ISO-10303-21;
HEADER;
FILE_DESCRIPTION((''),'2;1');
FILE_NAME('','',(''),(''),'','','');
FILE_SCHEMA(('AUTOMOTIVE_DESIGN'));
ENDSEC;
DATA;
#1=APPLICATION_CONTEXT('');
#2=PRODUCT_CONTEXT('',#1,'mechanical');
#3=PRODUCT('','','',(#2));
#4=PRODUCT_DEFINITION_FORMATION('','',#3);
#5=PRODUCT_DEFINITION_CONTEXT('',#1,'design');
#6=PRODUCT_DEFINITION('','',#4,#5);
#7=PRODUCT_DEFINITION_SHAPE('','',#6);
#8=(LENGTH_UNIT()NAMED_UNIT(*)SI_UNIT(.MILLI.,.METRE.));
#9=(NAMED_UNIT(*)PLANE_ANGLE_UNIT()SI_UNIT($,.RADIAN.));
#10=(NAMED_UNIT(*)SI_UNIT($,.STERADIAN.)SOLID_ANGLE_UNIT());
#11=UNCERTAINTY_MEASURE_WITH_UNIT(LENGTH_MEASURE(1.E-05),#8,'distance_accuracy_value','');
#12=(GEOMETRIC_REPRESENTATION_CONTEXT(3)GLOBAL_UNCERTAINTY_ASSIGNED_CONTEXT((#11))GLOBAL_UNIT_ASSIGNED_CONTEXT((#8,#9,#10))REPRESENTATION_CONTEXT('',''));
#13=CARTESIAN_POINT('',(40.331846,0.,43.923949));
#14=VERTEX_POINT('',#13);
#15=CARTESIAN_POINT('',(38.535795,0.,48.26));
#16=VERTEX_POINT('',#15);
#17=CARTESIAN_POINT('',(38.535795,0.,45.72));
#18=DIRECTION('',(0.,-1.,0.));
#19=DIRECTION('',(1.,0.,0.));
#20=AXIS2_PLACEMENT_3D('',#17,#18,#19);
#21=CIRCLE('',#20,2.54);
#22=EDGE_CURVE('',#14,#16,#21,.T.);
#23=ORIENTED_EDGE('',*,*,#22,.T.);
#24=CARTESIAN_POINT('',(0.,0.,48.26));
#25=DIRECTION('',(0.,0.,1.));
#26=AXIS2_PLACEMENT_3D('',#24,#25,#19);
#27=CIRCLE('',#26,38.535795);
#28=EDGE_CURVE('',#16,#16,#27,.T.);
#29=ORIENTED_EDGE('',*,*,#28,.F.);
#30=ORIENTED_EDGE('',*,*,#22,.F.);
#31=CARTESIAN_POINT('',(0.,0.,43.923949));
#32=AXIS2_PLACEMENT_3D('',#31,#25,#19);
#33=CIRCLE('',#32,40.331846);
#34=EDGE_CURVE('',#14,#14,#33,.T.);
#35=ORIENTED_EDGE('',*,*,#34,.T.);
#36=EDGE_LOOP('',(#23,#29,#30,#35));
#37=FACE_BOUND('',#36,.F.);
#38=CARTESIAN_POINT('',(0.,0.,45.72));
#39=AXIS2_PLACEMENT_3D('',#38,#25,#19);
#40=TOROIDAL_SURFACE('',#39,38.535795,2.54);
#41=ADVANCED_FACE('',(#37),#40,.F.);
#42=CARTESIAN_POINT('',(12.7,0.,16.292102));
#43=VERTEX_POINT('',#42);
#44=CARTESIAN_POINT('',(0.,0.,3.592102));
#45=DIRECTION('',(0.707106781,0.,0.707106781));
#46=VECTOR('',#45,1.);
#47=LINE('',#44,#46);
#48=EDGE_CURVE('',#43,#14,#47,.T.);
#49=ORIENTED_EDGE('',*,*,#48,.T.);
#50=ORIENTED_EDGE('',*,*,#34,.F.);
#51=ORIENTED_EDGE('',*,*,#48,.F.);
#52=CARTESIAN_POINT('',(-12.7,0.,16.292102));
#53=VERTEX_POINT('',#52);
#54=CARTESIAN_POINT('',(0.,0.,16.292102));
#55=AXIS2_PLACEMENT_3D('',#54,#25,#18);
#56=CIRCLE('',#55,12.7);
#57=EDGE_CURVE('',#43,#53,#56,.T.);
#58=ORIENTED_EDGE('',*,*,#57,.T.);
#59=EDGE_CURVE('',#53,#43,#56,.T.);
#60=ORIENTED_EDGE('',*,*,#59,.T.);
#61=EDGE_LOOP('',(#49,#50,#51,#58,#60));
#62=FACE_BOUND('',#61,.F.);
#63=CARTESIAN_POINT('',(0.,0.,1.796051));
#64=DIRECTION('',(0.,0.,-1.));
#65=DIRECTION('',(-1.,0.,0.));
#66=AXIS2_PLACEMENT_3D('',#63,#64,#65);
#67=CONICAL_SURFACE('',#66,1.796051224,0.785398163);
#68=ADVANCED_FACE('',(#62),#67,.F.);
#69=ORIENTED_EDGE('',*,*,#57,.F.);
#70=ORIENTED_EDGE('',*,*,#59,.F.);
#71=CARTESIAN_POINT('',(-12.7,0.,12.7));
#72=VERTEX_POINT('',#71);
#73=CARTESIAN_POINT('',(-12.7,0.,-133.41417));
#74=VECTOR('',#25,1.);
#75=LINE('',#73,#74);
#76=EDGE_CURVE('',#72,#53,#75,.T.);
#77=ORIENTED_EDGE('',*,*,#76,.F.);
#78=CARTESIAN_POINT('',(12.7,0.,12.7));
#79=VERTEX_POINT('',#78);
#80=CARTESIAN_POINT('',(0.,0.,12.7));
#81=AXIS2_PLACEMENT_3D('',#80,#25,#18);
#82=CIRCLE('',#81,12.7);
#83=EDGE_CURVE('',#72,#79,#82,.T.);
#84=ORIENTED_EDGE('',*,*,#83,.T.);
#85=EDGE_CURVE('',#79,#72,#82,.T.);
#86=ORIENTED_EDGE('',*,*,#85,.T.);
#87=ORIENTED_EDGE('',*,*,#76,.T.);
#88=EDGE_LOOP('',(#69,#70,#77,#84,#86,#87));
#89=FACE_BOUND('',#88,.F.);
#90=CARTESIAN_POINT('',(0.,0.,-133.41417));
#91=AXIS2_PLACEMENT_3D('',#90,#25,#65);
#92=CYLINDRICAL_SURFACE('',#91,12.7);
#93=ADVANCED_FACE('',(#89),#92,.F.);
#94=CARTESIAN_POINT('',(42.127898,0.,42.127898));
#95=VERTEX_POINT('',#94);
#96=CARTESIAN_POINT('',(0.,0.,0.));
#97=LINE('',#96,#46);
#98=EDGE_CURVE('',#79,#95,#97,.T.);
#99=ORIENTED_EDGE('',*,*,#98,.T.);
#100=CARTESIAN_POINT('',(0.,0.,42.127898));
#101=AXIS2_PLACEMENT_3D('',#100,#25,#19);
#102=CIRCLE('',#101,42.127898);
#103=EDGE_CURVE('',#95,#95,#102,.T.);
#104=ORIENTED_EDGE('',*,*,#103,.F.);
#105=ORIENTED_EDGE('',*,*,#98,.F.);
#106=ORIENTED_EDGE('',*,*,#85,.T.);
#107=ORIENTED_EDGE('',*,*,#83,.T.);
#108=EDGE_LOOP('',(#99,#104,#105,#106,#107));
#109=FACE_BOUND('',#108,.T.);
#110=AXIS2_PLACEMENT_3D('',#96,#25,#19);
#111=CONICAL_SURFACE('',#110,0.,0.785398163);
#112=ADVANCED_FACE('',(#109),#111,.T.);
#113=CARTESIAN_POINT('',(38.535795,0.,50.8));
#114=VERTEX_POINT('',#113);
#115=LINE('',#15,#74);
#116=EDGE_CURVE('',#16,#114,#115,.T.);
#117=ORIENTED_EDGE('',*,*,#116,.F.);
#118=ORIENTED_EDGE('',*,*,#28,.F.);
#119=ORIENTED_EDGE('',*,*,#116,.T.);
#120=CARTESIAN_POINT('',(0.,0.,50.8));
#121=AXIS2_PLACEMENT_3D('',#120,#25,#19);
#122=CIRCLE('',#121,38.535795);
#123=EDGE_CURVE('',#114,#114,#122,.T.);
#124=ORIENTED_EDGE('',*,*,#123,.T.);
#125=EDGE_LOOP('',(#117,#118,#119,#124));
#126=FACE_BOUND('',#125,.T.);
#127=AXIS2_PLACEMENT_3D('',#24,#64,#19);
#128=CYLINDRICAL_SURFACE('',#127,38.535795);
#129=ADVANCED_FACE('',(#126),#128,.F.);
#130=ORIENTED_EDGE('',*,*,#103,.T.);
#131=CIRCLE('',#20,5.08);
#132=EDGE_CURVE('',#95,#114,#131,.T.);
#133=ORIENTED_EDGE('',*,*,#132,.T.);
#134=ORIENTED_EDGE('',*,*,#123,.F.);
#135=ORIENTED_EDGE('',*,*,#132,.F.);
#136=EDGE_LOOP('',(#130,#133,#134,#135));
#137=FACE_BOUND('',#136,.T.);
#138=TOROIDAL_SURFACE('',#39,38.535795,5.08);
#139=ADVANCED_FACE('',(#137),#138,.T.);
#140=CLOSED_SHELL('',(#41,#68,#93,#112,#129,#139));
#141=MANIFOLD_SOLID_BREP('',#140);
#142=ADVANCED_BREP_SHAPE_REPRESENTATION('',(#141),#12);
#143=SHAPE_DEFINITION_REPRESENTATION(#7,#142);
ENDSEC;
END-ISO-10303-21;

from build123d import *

# Parameters (mm, degrees)
F2_R = 5.08
F3_T = -2.54
F5_D = 25.4


# Not quite as in the source:
# - a shell that OpenCascade refuses in one call is made with other operations: the cavity is built on its own and cut out


with BuildPart() as f1:
    # F0 (on Front) → F1 (revolve)
    with BuildSketch(Plane.XZ):
        Polygon((0, 50.8), (0, 0), (50.8, 50.8), align=None)
    revolve(axis=Axis((0, 0, 25.4), (0, 0, 1)))

    # F2
    f2_edges = [f1.edges().sort_by_distance(p)[0] for p in [
        (-50.8, 0, 50.8),
    ]]
    fillet(f2_edges, radius=F2_R)

    # F3: a shell. OpenCascade refuses it in one call, so the cavity is built on its own and cut out:
    # the body offset inwards by the wall thickness, plus a prism from it out through each open face.
    f3_core = offset(f1.part, amount=F3_T, mode=Mode.PRIVATE)
    f3_exits = [f3_core.faces().sort_by_distance(p)[0] for p in [
        (0, 0, 48.26),
    ]]
    add(f3_core, mode=Mode.SUBTRACT)
    extrude(f3_exits, amount=-F3_T, mode=Mode.SUBTRACT)

    # F5 (through all)
    with Locations(Plane(origin=(0, 0, 0), x_dir=(1, 0, 0), z_dir=(0, 0, -1))):
        with Locations((0, 0)):
            Hole(F5_D / 2)


solid = f1.part
